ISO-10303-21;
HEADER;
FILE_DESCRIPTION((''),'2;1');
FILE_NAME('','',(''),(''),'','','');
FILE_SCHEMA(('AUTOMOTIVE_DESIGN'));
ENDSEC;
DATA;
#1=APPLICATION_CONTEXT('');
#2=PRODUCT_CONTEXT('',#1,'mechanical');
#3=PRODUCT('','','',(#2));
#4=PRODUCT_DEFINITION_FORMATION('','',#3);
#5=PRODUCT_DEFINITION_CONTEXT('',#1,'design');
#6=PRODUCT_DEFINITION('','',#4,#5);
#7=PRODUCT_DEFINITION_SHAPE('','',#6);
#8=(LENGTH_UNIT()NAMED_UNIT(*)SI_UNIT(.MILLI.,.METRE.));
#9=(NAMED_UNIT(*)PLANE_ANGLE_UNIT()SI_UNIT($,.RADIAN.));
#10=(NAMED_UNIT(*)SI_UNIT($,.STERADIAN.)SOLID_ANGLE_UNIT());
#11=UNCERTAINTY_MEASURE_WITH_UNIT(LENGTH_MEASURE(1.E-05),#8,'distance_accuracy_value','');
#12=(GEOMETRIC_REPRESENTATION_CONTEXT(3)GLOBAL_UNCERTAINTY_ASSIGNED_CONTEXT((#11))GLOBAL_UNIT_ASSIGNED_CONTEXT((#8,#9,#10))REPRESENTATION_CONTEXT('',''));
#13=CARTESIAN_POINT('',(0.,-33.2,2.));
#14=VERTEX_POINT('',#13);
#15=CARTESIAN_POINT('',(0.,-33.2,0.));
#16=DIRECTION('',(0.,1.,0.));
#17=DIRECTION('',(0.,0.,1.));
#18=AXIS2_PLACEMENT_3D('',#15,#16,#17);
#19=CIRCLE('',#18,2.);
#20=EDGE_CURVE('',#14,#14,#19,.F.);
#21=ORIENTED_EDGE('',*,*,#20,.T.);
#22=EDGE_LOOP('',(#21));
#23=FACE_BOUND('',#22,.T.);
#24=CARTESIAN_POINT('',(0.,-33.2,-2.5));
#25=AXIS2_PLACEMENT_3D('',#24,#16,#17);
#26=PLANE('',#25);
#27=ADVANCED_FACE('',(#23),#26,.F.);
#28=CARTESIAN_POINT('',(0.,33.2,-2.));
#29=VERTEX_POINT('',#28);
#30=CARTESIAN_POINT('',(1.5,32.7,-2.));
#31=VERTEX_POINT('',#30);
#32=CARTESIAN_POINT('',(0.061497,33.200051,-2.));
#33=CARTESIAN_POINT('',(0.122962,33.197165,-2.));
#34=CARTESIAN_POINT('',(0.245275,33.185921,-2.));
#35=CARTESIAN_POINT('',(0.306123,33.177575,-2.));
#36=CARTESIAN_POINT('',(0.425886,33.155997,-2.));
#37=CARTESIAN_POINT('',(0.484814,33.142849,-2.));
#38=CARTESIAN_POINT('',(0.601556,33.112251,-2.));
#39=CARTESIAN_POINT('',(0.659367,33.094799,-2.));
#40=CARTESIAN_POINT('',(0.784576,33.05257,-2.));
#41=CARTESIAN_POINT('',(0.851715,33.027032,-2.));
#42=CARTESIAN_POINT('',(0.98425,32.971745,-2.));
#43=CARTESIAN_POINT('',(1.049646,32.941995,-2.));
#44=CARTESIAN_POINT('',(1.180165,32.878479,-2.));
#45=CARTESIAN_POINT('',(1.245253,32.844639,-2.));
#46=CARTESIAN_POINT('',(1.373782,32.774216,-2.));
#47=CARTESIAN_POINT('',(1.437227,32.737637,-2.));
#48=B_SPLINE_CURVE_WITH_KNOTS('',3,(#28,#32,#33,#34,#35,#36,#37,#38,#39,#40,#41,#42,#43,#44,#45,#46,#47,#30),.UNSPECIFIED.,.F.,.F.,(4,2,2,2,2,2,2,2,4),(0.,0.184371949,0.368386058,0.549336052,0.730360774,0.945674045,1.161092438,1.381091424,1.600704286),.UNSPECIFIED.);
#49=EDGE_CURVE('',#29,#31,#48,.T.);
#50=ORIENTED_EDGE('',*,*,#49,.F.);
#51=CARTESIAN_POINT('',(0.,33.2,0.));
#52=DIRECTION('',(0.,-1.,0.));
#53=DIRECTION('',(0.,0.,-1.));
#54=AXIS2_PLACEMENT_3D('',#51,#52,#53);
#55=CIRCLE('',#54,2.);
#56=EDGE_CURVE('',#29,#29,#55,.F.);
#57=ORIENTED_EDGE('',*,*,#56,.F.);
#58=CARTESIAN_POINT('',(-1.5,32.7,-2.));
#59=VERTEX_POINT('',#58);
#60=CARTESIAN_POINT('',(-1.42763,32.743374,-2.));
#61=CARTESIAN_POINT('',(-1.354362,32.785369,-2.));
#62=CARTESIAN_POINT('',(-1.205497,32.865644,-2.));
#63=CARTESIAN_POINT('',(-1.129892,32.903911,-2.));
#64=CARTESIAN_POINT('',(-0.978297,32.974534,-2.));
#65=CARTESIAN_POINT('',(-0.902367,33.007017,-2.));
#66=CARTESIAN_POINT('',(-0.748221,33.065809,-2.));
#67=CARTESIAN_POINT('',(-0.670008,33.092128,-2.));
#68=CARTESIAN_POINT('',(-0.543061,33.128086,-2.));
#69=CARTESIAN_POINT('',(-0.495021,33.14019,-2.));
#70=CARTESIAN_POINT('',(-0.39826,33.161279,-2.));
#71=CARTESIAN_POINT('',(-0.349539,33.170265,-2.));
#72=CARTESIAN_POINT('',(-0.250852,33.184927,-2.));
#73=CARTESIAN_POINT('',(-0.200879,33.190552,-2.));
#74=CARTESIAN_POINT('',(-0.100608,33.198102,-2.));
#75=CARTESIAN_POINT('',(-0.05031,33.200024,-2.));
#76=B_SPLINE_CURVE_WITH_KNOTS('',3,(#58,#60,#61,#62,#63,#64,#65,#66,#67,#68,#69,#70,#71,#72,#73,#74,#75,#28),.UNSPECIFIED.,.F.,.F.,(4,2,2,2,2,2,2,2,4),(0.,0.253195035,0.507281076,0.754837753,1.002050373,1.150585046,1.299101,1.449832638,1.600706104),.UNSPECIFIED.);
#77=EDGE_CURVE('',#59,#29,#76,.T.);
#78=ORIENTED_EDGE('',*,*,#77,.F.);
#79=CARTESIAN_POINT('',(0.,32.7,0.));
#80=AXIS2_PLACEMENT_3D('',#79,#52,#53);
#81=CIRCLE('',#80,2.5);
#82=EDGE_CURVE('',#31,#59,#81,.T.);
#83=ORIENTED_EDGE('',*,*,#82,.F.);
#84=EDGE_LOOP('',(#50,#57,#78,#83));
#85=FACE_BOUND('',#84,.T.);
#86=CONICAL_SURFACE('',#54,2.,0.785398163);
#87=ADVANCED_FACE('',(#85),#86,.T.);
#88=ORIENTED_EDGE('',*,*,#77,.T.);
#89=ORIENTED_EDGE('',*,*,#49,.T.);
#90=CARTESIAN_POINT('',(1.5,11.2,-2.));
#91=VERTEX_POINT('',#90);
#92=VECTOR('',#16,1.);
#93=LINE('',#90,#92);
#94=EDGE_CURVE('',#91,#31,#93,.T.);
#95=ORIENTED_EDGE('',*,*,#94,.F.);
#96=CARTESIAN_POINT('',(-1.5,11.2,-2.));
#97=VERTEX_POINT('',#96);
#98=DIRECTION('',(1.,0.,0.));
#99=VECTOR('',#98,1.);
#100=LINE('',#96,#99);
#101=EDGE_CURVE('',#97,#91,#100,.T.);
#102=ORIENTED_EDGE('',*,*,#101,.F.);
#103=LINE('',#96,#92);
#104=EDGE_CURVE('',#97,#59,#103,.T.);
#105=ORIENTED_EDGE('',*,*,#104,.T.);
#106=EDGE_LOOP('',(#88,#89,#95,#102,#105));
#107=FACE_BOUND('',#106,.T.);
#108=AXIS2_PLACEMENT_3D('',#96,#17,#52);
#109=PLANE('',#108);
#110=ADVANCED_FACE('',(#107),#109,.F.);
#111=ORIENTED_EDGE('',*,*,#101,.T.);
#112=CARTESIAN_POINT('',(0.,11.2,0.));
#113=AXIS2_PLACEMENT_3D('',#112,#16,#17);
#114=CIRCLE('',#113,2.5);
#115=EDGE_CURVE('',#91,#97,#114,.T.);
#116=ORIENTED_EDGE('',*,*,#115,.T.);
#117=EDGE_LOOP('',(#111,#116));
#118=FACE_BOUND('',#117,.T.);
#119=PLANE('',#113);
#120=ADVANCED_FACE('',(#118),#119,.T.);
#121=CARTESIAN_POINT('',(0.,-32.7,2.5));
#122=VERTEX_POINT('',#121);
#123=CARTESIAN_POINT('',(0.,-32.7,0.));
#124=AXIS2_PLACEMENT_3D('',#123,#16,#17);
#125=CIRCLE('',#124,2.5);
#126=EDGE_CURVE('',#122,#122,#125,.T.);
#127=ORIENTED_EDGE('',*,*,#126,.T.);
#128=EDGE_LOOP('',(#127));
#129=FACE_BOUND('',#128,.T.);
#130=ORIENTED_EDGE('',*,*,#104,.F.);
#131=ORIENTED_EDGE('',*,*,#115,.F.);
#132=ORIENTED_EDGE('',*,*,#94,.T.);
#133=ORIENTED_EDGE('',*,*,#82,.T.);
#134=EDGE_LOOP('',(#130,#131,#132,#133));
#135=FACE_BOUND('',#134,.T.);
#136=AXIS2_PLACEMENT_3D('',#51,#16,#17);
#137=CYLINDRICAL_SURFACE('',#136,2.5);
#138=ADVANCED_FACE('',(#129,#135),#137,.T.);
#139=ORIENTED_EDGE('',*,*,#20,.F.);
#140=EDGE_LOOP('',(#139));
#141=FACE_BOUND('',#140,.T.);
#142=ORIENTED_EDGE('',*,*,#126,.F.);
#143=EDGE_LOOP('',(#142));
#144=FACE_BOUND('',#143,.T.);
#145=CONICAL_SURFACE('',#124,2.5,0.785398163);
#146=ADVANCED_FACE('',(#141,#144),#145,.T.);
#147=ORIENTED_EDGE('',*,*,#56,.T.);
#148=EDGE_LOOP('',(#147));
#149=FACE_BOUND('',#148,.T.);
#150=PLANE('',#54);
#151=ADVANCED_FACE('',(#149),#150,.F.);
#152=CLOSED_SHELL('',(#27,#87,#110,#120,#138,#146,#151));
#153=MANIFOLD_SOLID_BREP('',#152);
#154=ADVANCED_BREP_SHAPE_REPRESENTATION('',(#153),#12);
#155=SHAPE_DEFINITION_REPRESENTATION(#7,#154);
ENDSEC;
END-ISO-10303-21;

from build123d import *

# Parameters (mm, degrees)
SKETCH3_W             = 2.5
SKETCH3_H             = 66.4
CORTE_EXTRUS_O1_DEPTH = 22
CHANFRO1_SIZE         = 0.5


with BuildPart() as part:
    # Sketch3 → Revolve2 (revolve)
    with BuildSketch(Plane(origin=(0, 0, 0), x_dir=(0, 0, -1), z_dir=(1, 0, 0)), mode=Mode.PRIVATE) as revolve2_sk:
        with Locations((1.25, 0)):
            Rectangle(SKETCH3_W, SKETCH3_H)
    revolve(revolve2_sk.sketch.rotate(Axis((0, 33.2, 0), (0, -1, 0)), 180), axis=Axis((0, 33.2, 0), (0, -1, 0)))

    # Esboço1 → Corte-extrusão1 (cut)
    with BuildSketch(Plane(origin=(0, 33.2, 0), x_dir=(1, 0, 0), z_dir=(0, 1, 0))):
        with BuildLine():
            Line((-1.5, 2), (1.5, 2))
            ThreePointArc((1.5, 2), (0, 2.5), (-1.5, 2))
        make_face()
    extrude(amount=-CORTE_EXTRUS_O1_DEPTH, mode=Mode.SUBTRACT)

    # Chanfro1
    chanfro1_edges = [part.edges().sort_by_distance(p)[0] for p in [
        (0, -33.2, -2.5),
        (2.371708245, 33.2, 0.790569415),
    ]]
    chamfer(chanfro1_edges, length=CHANFRO1_SIZE - 0.0001)  # a hair under: the kernel refuses the full size


solid = part.part
